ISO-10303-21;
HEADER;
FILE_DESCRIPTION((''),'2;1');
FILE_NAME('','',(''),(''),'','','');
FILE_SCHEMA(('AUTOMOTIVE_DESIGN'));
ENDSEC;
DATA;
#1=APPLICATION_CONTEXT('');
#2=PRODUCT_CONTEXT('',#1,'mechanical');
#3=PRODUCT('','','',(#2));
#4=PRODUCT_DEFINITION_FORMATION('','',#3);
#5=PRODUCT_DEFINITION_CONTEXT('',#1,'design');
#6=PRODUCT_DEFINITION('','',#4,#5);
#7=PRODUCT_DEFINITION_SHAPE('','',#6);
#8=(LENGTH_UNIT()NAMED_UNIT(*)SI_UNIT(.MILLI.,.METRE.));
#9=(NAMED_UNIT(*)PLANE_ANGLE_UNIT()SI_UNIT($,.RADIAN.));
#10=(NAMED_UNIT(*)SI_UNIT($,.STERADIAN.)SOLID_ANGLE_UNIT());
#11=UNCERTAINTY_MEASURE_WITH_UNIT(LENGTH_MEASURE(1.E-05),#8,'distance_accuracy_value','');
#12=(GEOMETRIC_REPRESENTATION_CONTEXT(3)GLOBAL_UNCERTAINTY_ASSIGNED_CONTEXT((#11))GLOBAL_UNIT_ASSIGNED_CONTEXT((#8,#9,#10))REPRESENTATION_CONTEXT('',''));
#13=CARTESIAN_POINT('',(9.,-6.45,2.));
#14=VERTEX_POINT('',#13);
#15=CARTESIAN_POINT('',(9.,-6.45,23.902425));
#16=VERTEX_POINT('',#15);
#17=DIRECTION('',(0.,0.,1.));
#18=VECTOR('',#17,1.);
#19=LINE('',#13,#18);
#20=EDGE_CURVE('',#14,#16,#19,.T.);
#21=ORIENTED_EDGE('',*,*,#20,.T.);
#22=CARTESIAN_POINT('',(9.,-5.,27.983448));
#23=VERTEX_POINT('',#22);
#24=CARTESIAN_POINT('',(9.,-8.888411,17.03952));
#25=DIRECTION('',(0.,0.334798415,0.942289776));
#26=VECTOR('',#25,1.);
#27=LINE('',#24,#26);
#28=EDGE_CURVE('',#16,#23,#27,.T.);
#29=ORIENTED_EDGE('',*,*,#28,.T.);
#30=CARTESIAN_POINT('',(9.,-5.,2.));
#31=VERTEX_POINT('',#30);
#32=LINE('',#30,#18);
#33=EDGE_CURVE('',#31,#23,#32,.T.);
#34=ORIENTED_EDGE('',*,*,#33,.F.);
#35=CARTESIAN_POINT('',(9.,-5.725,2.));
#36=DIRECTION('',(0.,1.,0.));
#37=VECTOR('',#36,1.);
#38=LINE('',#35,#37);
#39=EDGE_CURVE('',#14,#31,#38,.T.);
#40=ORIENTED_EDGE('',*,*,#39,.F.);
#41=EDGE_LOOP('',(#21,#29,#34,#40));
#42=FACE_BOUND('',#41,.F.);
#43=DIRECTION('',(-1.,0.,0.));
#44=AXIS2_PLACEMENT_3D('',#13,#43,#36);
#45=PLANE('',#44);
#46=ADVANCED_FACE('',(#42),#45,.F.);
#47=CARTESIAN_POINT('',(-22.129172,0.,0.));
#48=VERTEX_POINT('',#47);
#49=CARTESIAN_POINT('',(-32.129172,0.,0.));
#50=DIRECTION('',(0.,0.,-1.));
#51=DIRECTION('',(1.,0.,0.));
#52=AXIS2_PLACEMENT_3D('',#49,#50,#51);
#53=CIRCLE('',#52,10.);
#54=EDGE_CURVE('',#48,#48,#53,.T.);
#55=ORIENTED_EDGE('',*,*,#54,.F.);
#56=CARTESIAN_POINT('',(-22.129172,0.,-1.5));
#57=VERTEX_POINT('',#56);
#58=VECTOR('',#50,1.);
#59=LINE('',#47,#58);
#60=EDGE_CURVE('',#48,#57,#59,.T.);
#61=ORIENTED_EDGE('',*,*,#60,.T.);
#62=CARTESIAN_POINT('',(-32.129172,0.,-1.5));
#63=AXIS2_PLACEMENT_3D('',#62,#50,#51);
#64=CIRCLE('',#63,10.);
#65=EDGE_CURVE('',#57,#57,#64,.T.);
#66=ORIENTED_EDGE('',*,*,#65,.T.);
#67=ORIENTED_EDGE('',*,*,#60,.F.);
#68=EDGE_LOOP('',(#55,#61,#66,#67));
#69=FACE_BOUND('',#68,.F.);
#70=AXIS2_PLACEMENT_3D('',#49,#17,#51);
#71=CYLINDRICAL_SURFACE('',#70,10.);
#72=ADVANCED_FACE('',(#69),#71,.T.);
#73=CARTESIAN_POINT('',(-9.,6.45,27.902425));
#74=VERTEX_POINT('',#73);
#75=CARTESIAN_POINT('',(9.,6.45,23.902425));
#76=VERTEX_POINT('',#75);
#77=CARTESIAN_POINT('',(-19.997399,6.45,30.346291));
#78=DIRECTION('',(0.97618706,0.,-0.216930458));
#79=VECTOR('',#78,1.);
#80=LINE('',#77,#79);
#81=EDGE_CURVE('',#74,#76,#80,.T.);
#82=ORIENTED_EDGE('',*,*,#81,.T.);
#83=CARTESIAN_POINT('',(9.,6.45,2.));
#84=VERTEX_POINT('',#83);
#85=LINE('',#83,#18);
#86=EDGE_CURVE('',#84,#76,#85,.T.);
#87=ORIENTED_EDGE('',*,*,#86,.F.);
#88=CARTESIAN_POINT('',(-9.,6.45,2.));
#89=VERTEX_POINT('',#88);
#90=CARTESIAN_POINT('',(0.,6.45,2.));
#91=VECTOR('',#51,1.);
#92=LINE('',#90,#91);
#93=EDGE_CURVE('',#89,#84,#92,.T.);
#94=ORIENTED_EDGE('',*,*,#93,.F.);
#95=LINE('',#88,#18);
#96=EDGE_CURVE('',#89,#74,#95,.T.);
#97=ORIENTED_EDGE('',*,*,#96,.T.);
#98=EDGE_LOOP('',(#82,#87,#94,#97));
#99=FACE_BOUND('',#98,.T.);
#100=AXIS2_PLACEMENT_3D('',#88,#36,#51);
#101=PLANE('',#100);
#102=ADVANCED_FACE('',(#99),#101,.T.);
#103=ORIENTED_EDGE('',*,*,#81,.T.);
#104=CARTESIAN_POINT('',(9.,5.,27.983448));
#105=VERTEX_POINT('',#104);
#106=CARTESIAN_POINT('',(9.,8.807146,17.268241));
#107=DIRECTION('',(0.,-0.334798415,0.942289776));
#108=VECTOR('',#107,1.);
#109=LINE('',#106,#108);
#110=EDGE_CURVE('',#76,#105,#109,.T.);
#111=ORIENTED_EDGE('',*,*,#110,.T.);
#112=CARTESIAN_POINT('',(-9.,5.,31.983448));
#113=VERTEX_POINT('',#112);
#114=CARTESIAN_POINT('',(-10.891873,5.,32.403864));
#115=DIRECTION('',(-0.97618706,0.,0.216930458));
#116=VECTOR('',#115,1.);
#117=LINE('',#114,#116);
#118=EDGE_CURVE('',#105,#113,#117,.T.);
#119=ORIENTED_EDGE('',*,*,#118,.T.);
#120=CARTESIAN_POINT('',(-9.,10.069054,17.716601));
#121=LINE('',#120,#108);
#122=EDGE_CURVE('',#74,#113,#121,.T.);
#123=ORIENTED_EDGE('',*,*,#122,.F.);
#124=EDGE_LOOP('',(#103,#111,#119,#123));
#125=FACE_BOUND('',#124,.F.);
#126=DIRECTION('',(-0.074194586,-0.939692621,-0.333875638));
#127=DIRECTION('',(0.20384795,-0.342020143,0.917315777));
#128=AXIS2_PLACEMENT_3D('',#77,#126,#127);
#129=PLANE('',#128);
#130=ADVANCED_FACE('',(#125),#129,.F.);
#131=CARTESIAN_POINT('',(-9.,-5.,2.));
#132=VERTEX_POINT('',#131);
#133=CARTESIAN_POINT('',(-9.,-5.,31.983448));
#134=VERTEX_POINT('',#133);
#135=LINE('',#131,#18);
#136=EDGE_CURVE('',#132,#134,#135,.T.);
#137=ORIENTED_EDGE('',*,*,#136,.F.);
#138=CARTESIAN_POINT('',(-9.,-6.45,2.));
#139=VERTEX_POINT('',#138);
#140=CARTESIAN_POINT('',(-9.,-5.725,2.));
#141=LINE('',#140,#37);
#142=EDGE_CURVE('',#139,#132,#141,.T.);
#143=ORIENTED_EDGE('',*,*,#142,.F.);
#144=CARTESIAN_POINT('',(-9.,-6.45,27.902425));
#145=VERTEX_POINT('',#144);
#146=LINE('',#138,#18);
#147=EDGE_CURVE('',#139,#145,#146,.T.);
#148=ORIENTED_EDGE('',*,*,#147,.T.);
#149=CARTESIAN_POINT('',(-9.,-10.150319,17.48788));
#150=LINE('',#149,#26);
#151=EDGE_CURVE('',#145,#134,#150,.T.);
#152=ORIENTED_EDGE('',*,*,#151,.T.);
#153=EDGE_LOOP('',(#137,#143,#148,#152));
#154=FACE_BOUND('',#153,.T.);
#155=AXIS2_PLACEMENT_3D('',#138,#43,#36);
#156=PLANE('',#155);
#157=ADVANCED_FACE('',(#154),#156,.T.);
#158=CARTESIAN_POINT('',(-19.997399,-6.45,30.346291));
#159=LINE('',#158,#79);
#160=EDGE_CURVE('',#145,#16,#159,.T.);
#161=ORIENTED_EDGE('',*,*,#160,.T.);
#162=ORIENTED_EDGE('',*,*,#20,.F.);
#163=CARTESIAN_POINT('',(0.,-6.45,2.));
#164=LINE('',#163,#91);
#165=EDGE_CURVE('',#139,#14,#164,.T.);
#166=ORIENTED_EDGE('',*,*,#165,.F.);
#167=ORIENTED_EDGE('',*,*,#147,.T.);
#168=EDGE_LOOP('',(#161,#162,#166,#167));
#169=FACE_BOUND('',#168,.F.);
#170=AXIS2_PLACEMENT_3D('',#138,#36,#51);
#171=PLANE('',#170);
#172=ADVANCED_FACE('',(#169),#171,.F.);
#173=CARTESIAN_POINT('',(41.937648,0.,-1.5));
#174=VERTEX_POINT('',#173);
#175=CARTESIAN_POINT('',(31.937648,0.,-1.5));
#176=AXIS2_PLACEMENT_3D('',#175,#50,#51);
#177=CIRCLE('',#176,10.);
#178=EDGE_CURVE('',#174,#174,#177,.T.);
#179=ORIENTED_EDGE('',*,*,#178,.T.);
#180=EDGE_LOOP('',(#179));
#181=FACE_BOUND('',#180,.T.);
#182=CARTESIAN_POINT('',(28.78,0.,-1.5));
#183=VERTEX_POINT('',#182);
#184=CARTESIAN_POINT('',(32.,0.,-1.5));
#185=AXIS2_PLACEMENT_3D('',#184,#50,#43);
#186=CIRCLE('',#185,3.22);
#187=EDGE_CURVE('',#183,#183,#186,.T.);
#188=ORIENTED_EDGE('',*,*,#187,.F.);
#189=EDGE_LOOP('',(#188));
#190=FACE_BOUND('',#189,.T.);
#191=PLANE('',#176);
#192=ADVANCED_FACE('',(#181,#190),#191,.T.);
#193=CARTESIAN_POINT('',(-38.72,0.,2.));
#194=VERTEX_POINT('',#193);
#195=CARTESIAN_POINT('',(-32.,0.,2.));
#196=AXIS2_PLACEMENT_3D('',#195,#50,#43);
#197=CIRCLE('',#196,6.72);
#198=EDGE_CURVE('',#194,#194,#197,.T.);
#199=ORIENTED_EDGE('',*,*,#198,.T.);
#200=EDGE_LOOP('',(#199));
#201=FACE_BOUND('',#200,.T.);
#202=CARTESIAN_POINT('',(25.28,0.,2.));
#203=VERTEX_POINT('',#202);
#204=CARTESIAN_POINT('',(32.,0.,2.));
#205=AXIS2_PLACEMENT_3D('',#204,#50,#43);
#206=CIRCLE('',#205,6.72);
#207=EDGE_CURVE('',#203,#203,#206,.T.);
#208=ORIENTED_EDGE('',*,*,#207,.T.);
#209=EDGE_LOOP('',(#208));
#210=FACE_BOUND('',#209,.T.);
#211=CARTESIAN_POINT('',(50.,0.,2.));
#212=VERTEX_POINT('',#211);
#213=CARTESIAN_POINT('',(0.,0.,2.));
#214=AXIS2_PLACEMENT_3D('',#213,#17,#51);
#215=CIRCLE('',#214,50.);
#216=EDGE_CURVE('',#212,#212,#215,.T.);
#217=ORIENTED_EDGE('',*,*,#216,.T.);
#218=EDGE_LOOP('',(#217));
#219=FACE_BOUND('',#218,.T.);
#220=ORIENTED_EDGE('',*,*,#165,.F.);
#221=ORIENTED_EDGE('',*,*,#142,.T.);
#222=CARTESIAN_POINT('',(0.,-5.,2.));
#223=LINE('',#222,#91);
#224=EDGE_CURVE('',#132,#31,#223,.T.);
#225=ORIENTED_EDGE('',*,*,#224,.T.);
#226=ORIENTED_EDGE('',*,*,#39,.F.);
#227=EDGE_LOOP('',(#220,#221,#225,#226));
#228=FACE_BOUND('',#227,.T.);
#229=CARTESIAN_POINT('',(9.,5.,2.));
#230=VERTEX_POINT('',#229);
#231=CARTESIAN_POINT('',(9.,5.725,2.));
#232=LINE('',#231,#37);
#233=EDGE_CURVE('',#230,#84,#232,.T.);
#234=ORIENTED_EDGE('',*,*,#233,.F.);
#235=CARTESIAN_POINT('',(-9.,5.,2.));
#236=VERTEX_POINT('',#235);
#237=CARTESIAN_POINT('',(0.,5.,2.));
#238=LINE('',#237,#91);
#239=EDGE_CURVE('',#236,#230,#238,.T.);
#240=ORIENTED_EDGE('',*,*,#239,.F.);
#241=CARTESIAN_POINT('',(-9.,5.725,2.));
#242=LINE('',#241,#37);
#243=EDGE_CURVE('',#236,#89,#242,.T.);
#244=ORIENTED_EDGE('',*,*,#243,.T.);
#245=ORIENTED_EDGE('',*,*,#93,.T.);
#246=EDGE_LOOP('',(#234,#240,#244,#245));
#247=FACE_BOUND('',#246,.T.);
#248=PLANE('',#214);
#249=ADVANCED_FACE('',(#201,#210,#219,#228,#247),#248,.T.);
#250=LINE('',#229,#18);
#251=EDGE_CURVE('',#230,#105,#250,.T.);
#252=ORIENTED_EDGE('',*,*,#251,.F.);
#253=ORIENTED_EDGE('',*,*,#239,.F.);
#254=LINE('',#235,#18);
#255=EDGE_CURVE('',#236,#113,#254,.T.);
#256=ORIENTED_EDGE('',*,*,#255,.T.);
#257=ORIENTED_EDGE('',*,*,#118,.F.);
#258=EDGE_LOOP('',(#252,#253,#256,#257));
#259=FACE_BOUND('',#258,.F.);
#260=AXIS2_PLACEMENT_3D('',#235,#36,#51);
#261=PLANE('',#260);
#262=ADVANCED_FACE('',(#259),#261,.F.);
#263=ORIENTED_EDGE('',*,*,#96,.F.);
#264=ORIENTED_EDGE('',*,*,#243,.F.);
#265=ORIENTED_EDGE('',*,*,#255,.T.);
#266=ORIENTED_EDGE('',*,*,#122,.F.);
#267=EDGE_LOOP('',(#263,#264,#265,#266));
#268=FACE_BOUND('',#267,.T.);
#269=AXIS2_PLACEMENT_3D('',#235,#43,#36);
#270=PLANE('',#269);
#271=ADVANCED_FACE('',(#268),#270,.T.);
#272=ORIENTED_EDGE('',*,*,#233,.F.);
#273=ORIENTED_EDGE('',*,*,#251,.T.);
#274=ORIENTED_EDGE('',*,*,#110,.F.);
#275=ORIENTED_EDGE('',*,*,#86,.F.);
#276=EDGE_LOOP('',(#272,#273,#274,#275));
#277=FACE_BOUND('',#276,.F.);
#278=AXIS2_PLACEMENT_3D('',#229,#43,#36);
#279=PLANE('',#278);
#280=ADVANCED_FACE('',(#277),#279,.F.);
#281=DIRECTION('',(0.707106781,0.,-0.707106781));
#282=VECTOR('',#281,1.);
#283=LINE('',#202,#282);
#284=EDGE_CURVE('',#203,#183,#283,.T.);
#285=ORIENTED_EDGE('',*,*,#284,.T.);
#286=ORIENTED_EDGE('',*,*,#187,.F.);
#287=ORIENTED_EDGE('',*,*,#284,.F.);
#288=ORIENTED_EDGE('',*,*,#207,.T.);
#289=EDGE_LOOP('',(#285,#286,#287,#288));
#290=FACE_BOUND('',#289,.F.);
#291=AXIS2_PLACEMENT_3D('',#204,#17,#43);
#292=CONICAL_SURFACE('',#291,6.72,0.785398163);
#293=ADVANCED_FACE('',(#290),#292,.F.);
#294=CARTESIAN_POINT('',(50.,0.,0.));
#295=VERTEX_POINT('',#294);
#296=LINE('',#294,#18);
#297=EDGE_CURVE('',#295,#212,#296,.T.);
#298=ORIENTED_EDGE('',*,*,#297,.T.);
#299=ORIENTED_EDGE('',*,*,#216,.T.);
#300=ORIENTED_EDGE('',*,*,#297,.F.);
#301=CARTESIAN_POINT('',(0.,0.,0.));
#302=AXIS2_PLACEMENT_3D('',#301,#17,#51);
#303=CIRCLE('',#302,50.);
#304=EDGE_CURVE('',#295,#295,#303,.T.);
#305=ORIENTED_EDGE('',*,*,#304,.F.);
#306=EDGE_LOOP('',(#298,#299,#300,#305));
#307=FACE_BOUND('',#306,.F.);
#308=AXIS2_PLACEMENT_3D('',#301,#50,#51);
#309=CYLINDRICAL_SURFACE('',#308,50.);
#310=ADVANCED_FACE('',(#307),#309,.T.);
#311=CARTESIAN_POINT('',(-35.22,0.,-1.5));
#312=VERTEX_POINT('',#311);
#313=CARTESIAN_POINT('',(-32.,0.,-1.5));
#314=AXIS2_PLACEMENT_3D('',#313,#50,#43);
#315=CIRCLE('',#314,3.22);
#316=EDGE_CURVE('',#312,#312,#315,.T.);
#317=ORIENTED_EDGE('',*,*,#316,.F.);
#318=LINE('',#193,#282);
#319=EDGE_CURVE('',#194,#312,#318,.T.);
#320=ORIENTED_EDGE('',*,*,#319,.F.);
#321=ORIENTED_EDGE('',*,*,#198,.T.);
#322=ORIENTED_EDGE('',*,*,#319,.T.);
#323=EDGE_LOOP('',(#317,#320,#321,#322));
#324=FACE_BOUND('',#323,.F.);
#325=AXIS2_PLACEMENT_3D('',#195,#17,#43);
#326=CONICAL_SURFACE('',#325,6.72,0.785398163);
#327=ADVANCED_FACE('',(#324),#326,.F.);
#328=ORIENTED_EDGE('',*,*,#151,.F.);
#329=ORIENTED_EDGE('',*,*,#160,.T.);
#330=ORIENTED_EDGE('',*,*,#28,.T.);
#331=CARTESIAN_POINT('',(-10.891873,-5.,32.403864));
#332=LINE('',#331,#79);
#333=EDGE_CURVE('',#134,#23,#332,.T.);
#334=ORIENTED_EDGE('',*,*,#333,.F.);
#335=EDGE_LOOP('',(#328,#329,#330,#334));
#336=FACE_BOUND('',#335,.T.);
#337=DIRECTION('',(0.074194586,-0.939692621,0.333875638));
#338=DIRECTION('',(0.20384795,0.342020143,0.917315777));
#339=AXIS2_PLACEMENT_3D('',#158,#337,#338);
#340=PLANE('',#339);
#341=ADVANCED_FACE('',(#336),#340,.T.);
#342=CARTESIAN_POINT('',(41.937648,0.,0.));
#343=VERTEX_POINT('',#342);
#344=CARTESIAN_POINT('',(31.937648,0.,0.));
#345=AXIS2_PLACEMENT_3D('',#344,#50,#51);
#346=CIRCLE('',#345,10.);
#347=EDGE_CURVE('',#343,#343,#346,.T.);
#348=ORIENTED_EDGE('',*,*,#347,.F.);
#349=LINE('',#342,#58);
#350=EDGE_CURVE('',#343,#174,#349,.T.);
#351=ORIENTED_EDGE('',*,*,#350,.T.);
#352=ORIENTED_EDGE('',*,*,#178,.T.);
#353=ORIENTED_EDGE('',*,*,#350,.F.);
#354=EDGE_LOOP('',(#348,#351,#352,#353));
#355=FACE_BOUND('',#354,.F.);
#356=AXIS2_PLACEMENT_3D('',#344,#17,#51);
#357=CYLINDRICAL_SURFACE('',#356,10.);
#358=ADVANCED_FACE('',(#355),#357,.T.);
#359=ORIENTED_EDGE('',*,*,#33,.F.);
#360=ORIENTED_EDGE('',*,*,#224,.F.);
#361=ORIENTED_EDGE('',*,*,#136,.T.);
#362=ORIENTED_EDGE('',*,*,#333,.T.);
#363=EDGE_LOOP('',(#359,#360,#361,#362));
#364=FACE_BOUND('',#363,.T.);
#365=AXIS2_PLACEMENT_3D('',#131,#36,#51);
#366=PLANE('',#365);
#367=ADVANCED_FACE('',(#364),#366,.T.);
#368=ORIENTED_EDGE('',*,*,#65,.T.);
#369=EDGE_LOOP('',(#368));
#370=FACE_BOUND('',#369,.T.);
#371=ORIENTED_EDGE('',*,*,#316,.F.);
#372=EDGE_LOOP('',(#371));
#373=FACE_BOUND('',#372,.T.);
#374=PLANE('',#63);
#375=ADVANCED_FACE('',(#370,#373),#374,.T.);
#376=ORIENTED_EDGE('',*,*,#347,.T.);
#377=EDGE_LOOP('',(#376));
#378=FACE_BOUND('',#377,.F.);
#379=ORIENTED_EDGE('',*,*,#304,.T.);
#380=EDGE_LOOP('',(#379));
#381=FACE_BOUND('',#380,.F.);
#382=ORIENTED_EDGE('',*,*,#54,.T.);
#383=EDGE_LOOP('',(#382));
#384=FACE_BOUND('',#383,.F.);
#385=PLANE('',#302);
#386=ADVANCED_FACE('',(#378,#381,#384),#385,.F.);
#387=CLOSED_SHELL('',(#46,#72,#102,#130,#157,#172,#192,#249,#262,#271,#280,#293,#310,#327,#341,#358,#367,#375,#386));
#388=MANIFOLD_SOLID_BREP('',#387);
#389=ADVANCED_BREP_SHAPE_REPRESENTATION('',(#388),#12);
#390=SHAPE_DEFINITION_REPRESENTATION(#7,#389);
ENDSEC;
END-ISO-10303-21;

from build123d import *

# Parameters (mm, degrees)
F0_R           = 50
F1_DEPTH       = 2
F3_R           = 10
F4_DEPTH       = 1.5
F5_D           = 6.4
F5_CSINK_D     = 13.44
F5_CSINK_ANGLE = 90
F6_W           = 18
F6_H           = 1.45
F7_DEPTH       = 30
F9_DEPTH       = 25
F10_T1_DEPTH   = 39.192646775


# Not quite as in the source:
# - a fillet or chamfer that OpenCascade refuses, or shapes differently, is made with other operations: its cross-section is extruded or revolved along the edge and cut away or added


with BuildPart() as f1:
    # F0 (on Top) → F1 (new body)
    with BuildSketch(Plane.XY):
        Circle(F0_R)
    extrude(amount=F1_DEPTH)

    # F3 (on face) → F4 (join)
    with BuildSketch(Plane(origin=(0, 0, 0), x_dir=(1, 0, 0), z_dir=(0, 0, -1))):
        with Locations((31.9376476109, 0)):
            Circle(F3_R)
        with Locations((-32.1291722357, 0)):
            Circle(F3_R)
    extrude(amount=F4_DEPTH)

    # F5 (through all)
    with Locations(Plane.XY.offset(2)):
        with Locations((-32, 0), (32, 0)):
            CounterSinkHole(F5_D / 2, F5_CSINK_D / 2, counter_sink_angle=F5_CSINK_ANGLE)

    # F6 (on face) → F7 (join)
    with BuildSketch(Plane.XY.offset(2)):
        with Locations((0, 5.725)):
            Rectangle(F6_W, F6_H)
        with Locations((0, -5.725)):
            Rectangle(F6_W, F6_H)
    extrude(amount=F7_DEPTH)

    # F8 (on face) → F9 (cut)
    with BuildSketch(Plane.XZ.offset(6.45)):
        Polygon((9, 32), (-9, 32), (9, 28), align=None)
    extrude(amount=-F9_DEPTH, mode=Mode.SUBTRACT)

    # F10: chamfer of 4 x 1.4558809371 on 2 edges, made by hand

    # F10_s2 → F10_t1 (cut)
    with BuildSketch(Plane(origin=(-25.4826184945, 0, 5.6628041099), x_dir=(0, 1, 0), z_dir=(0.9761870602, 0, -0.2169304578))):
        Polygon((6.45, 25.2856118055), (4.9941190629, 29.2856118055), (6.45, 29.2856118055), align=None)
        Polygon((-6.45, 25.2856118055), (-4.9941190629, 29.2856118055), (-6.45, 29.2856118055), align=None)
    extrude(amount=F10_T1_DEPTH, mode=Mode.SUBTRACT)


solid = f1.part
